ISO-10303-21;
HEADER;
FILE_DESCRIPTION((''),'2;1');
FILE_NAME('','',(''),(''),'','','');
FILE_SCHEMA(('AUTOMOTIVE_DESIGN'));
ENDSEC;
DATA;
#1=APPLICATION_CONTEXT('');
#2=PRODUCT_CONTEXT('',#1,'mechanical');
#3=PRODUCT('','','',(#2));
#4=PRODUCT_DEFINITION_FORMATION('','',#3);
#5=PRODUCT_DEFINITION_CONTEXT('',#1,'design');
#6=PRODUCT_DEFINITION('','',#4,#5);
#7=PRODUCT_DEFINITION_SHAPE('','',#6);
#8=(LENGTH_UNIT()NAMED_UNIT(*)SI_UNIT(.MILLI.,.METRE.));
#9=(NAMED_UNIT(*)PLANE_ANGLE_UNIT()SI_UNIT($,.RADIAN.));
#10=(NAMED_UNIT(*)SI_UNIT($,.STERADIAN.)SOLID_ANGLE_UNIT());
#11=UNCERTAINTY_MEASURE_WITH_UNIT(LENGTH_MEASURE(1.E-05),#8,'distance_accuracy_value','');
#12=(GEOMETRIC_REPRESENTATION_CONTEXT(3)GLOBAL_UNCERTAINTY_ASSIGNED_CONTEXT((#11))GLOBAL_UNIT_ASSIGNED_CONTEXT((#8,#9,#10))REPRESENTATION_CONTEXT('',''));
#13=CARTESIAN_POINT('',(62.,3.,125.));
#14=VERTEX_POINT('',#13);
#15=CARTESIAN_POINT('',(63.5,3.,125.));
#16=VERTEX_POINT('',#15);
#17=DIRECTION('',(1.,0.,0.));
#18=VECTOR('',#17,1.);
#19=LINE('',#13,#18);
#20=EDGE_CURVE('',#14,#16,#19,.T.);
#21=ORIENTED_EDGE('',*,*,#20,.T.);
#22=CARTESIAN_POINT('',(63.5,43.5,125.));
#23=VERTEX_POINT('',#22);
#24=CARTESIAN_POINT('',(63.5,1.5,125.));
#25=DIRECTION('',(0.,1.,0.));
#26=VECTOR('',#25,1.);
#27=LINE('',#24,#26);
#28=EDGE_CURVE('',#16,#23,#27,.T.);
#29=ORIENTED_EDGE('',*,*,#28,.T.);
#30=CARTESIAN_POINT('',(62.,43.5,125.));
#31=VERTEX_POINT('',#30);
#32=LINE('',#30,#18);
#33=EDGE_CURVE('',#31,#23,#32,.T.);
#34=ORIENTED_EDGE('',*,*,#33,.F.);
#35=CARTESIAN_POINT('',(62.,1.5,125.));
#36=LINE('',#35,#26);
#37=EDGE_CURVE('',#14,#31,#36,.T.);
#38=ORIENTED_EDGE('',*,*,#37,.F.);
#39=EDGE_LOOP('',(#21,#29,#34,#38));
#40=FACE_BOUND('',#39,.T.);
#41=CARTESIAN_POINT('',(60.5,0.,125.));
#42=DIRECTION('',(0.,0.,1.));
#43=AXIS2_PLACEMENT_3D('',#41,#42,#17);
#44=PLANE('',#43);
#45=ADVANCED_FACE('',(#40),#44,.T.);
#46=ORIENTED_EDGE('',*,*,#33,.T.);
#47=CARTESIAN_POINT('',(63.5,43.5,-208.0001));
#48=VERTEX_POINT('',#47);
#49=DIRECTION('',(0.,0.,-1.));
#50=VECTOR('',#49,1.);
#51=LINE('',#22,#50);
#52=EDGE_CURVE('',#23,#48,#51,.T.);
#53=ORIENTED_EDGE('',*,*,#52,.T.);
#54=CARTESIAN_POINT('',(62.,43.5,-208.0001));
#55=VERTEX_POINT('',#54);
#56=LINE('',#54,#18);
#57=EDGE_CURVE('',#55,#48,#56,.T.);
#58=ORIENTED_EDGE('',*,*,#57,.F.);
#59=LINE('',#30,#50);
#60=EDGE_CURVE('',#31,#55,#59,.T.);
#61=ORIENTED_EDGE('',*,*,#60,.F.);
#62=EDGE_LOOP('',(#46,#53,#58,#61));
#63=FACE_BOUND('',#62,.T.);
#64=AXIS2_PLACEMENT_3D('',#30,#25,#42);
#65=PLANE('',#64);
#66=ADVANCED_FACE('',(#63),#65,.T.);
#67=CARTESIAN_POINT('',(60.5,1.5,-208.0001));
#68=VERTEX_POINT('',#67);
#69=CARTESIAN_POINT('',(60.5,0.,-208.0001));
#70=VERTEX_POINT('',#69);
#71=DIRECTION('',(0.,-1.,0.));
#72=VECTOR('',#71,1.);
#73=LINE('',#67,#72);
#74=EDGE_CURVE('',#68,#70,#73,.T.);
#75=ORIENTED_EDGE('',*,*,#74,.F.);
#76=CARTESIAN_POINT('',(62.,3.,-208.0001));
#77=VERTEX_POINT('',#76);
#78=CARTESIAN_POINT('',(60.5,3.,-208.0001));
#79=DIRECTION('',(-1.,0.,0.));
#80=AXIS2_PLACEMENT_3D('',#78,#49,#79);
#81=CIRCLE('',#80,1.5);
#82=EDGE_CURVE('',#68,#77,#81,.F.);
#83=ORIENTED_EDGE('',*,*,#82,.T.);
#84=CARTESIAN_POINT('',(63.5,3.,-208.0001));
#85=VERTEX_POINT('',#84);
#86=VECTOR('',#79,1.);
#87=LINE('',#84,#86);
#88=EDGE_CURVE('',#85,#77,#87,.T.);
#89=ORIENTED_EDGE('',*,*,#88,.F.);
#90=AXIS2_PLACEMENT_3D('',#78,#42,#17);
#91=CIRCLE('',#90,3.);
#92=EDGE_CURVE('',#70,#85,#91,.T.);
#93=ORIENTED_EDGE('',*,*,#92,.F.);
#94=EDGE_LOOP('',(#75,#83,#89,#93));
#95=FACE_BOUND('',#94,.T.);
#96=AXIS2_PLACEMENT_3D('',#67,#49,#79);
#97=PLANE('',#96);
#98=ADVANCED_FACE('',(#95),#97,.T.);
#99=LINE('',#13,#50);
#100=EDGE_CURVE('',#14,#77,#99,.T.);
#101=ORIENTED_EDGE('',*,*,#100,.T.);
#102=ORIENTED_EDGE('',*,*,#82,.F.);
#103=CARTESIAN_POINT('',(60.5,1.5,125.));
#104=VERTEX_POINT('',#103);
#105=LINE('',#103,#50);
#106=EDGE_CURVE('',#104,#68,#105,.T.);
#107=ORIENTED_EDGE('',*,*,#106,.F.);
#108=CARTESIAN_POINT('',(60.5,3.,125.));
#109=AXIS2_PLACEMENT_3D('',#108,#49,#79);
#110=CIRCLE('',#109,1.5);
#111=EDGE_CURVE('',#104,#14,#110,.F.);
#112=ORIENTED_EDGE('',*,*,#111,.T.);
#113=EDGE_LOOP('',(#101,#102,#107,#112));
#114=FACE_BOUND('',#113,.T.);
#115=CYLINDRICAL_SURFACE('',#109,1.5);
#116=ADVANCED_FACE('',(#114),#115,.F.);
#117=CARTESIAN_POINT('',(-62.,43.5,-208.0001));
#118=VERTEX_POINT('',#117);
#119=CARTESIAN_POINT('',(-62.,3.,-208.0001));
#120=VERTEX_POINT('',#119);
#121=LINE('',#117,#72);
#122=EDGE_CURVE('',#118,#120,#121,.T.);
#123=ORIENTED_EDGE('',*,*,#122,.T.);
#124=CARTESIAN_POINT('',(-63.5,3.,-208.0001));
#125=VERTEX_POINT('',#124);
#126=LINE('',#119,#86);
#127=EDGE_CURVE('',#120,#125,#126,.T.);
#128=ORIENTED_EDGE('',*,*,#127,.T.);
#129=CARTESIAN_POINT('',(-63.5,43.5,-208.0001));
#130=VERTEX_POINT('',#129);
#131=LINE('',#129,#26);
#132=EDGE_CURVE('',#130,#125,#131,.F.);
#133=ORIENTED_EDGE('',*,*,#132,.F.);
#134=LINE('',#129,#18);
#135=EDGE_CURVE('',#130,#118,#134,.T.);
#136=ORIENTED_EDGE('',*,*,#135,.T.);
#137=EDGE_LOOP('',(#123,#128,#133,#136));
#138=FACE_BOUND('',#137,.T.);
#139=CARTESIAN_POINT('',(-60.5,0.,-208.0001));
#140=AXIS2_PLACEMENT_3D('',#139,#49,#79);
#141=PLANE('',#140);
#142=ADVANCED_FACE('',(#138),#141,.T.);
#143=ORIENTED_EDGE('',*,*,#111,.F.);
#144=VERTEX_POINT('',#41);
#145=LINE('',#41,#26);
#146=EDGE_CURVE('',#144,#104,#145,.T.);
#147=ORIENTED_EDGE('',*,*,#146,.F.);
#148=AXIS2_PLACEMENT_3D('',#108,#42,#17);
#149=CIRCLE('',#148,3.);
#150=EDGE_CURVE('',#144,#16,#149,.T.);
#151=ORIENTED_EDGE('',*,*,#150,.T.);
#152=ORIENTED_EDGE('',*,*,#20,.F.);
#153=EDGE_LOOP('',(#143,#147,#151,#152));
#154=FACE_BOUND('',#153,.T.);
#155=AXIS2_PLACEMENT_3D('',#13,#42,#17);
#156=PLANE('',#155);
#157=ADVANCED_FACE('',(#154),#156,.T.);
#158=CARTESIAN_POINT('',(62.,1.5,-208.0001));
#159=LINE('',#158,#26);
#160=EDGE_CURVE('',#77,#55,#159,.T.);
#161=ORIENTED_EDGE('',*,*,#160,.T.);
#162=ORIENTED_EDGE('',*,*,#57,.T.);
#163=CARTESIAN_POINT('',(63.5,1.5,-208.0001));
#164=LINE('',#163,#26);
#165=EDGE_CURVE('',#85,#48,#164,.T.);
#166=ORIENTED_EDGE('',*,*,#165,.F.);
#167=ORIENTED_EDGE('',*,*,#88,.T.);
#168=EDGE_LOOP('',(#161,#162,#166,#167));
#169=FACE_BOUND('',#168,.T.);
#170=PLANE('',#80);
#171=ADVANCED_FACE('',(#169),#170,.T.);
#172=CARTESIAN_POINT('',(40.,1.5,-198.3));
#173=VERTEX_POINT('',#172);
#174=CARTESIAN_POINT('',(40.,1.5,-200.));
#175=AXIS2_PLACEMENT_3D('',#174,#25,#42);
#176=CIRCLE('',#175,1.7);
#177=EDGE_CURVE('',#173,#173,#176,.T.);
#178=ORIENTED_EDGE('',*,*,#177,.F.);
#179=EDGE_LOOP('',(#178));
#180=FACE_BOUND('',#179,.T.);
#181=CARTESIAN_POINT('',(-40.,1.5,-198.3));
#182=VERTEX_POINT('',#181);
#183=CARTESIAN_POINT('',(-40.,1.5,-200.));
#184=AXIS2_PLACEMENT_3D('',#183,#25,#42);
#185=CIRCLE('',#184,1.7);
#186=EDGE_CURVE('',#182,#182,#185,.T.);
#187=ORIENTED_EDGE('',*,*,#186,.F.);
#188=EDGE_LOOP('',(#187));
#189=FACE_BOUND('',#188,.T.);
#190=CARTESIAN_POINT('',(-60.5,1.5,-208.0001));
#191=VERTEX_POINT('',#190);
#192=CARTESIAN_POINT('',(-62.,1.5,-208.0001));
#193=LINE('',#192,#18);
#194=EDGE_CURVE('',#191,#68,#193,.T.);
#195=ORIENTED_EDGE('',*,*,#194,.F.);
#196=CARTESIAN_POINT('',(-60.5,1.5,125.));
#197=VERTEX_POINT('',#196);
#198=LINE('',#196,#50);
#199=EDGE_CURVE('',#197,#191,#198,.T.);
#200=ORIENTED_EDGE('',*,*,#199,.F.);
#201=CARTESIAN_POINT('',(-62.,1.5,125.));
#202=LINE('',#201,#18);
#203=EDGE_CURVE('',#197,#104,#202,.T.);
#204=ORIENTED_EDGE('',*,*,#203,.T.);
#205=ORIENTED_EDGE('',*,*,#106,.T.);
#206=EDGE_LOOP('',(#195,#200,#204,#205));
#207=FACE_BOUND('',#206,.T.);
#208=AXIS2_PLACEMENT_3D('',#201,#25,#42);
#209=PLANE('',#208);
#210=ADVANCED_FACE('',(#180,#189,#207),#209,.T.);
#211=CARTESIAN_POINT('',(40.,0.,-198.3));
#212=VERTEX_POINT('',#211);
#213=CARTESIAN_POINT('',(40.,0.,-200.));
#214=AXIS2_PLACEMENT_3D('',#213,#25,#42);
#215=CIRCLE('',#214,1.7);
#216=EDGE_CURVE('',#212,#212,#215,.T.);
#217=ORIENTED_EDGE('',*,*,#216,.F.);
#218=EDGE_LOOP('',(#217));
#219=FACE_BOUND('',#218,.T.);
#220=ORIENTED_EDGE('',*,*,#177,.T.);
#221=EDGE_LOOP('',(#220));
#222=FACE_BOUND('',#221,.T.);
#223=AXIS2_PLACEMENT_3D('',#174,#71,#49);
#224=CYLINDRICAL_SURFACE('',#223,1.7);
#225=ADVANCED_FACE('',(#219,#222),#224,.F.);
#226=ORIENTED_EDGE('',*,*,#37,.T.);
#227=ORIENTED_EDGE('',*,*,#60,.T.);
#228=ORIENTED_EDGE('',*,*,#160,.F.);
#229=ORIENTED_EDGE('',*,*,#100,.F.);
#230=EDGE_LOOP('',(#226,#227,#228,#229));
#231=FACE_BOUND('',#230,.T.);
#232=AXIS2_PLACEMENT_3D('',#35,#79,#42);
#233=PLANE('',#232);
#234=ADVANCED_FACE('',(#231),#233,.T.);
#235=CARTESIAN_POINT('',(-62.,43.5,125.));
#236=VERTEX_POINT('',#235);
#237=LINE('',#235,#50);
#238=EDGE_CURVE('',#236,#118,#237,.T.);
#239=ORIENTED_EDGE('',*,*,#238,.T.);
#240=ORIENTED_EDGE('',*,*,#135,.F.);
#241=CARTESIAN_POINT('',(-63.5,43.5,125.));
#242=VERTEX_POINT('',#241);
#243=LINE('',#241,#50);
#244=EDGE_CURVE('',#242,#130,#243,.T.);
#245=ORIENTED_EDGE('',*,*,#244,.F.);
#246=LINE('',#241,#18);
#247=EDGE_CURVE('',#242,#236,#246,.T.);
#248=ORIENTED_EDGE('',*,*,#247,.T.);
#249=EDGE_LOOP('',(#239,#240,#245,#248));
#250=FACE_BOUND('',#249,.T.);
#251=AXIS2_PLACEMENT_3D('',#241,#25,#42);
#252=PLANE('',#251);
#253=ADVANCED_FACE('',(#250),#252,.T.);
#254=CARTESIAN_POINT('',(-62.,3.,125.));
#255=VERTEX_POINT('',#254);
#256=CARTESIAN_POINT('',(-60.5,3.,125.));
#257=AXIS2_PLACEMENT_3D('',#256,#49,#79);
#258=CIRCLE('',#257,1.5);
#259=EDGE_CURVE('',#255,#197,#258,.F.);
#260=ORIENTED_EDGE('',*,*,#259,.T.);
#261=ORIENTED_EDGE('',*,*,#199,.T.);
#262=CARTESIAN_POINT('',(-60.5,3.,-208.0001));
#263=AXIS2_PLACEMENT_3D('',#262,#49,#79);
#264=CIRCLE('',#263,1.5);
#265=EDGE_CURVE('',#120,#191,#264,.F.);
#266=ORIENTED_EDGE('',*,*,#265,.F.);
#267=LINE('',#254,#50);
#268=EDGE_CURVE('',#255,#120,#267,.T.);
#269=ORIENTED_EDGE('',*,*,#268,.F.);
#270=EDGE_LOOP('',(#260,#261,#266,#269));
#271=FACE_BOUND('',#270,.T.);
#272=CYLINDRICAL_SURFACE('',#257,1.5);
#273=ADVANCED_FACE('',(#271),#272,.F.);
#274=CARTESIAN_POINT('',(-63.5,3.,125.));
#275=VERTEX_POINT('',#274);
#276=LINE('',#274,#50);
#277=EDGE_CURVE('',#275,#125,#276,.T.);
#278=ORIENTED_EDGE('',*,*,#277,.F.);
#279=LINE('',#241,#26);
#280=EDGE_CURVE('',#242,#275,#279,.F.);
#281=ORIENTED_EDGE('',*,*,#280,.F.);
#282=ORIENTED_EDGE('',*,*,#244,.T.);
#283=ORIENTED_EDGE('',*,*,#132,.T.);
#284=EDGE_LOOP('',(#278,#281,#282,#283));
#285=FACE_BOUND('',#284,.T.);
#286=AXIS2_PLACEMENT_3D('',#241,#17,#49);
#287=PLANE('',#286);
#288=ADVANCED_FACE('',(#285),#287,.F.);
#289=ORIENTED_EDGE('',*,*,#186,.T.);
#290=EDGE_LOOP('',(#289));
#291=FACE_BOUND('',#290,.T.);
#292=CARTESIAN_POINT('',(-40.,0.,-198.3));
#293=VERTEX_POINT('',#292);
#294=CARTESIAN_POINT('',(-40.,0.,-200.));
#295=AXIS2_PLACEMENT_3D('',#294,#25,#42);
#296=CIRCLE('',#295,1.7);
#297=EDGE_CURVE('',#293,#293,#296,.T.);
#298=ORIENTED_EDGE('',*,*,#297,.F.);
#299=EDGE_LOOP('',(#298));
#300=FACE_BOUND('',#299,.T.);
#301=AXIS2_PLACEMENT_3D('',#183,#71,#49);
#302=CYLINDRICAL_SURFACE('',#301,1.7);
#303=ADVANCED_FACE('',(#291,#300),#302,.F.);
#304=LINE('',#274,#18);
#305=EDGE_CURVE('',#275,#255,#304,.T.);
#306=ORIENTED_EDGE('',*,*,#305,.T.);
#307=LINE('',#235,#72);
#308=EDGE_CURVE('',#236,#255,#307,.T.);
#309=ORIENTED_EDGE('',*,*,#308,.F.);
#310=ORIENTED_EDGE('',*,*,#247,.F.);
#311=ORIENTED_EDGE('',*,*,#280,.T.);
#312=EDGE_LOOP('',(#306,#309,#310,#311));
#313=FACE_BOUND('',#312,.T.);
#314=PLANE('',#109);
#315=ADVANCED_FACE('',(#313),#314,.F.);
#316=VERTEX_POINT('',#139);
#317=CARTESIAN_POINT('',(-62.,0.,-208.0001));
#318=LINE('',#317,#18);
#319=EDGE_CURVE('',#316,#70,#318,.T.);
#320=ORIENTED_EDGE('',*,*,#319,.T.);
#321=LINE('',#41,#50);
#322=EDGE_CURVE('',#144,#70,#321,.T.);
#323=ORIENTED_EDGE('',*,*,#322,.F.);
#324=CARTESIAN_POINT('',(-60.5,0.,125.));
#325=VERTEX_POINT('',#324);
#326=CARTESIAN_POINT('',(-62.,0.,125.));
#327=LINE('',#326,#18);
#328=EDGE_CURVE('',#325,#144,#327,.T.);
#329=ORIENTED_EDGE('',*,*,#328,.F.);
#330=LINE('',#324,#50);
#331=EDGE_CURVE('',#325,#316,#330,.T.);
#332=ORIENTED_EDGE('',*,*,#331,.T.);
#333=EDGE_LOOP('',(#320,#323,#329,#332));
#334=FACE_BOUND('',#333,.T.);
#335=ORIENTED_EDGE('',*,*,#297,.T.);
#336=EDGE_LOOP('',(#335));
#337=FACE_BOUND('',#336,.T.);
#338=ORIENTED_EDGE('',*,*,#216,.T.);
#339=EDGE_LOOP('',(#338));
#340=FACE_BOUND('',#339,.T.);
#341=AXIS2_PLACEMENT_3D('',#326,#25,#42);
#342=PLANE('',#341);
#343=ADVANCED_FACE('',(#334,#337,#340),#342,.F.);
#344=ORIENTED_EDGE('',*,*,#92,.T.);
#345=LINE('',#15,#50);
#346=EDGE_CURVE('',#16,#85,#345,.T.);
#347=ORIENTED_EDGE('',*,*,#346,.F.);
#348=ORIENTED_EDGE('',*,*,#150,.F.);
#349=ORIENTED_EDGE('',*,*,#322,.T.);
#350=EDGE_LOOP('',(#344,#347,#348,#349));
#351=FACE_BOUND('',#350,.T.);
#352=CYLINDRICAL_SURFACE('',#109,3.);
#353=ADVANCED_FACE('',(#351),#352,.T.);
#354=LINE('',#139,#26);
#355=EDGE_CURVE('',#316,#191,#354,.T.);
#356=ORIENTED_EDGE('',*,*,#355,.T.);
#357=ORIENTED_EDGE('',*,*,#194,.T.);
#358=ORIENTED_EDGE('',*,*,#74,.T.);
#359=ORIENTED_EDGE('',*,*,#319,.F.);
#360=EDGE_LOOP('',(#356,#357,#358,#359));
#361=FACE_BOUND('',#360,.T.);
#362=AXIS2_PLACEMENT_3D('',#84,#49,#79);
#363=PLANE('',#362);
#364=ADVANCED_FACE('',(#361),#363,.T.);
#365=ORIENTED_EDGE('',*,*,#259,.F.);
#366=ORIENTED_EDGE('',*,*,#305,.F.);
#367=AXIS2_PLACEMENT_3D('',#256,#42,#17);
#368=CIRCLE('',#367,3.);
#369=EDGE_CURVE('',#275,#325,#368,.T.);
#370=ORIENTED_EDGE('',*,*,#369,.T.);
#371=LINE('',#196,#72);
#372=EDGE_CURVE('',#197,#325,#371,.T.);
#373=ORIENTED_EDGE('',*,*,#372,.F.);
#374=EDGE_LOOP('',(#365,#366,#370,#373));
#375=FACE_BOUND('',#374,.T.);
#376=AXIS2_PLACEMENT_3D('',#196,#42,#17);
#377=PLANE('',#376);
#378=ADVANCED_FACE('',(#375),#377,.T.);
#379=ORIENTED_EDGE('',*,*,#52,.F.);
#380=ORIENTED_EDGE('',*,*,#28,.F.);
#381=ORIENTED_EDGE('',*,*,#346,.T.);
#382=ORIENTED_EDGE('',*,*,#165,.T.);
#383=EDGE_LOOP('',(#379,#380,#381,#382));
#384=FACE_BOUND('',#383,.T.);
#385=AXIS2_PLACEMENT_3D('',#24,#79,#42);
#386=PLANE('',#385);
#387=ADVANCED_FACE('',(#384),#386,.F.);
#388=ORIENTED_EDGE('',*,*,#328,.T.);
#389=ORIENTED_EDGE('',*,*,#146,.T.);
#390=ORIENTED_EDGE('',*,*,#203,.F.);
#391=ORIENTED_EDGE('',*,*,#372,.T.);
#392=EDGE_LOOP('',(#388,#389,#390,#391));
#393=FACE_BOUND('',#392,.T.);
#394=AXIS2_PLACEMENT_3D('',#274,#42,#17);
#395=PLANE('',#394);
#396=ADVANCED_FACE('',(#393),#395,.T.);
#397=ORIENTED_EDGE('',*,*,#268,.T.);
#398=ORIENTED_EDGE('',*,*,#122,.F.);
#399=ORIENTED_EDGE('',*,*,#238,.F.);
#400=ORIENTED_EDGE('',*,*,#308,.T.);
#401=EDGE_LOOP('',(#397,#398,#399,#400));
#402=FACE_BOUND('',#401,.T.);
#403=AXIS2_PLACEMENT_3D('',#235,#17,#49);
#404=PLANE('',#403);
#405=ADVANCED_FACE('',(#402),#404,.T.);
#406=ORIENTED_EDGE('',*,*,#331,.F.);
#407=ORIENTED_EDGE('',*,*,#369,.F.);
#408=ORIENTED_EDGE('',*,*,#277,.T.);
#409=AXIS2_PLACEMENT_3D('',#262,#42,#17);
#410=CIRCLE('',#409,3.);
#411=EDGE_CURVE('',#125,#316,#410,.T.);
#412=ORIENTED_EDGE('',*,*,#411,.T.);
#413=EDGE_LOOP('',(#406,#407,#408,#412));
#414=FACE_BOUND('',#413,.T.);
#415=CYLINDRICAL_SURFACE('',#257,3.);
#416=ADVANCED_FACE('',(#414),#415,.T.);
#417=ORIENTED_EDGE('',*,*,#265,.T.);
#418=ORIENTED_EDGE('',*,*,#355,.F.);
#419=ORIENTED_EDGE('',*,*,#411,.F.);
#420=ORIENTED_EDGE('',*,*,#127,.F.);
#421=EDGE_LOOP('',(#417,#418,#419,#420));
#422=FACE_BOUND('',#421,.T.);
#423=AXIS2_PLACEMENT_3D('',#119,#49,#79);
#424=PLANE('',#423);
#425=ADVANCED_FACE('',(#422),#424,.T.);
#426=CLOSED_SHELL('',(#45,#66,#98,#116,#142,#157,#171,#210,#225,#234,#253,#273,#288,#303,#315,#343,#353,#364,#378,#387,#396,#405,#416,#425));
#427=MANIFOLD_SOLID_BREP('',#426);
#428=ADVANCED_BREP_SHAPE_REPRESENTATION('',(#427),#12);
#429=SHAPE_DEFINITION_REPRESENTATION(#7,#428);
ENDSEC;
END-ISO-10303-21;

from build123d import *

# Parameters (mm, degrees)
SM_TRAY_DEPTH       = 333
SK_FACEHOLES_R      = 1.7
CUT_FACEHOLES_DEPTH = 1.5


# Sheet-metal steps are written as plain solids
with BuildPart() as part:
    # SK_Tray → SM_Tray (new body)
    with BuildSketch(Plane.XY.offset(-208)):
        with BuildLine():
            Line((-62, 43.5), (-62, 3))
            ThreePointArc((-62, 3), (-61.560660172, 1.939339828), (-60.5, 1.5))
            Line((-60.5, 1.5), (60.5, 1.5))
            ThreePointArc((60.5, 1.5), (61.560660172, 1.939339828), (62, 3))
            Line((62, 3), (62, 43.5))
            Line((62, 43.5), (63.5, 43.5))
            Line((63.5, 43.5), (63.5, 3))
            ThreePointArc((63.5, 3), (62.621320344, 0.878679656), (60.5, 0))
            Line((60.5, 0), (-60.5, 0))
            ThreePointArc((-60.5, 0), (-62.621320344, 0.878679656), (-63.5, 3))
            Line((-63.5, 3), (-63.5, 43.5))
            Line((-63.5, 43.5), (-62, 43.5))
        make_face()
    extrude(amount=SM_TRAY_DEPTH)

    # SK_FaceHoles → CUT_FaceHoles (cut)
    with BuildSketch(Plane(origin=(0, 0, 0), x_dir=(1, 0, 0), z_dir=(0, 1, 0))):
        with Locations(Location((40, 200, 0), (0, 0, 270))):
            Circle(SK_FACEHOLES_R)
        with Locations(Location((-40, 200, 0), (0, 0, 270))):
            Circle(SK_FACEHOLES_R)
    extrude(amount=CUT_FACEHOLES_DEPTH, mode=Mode.SUBTRACT)


solid = part.part
